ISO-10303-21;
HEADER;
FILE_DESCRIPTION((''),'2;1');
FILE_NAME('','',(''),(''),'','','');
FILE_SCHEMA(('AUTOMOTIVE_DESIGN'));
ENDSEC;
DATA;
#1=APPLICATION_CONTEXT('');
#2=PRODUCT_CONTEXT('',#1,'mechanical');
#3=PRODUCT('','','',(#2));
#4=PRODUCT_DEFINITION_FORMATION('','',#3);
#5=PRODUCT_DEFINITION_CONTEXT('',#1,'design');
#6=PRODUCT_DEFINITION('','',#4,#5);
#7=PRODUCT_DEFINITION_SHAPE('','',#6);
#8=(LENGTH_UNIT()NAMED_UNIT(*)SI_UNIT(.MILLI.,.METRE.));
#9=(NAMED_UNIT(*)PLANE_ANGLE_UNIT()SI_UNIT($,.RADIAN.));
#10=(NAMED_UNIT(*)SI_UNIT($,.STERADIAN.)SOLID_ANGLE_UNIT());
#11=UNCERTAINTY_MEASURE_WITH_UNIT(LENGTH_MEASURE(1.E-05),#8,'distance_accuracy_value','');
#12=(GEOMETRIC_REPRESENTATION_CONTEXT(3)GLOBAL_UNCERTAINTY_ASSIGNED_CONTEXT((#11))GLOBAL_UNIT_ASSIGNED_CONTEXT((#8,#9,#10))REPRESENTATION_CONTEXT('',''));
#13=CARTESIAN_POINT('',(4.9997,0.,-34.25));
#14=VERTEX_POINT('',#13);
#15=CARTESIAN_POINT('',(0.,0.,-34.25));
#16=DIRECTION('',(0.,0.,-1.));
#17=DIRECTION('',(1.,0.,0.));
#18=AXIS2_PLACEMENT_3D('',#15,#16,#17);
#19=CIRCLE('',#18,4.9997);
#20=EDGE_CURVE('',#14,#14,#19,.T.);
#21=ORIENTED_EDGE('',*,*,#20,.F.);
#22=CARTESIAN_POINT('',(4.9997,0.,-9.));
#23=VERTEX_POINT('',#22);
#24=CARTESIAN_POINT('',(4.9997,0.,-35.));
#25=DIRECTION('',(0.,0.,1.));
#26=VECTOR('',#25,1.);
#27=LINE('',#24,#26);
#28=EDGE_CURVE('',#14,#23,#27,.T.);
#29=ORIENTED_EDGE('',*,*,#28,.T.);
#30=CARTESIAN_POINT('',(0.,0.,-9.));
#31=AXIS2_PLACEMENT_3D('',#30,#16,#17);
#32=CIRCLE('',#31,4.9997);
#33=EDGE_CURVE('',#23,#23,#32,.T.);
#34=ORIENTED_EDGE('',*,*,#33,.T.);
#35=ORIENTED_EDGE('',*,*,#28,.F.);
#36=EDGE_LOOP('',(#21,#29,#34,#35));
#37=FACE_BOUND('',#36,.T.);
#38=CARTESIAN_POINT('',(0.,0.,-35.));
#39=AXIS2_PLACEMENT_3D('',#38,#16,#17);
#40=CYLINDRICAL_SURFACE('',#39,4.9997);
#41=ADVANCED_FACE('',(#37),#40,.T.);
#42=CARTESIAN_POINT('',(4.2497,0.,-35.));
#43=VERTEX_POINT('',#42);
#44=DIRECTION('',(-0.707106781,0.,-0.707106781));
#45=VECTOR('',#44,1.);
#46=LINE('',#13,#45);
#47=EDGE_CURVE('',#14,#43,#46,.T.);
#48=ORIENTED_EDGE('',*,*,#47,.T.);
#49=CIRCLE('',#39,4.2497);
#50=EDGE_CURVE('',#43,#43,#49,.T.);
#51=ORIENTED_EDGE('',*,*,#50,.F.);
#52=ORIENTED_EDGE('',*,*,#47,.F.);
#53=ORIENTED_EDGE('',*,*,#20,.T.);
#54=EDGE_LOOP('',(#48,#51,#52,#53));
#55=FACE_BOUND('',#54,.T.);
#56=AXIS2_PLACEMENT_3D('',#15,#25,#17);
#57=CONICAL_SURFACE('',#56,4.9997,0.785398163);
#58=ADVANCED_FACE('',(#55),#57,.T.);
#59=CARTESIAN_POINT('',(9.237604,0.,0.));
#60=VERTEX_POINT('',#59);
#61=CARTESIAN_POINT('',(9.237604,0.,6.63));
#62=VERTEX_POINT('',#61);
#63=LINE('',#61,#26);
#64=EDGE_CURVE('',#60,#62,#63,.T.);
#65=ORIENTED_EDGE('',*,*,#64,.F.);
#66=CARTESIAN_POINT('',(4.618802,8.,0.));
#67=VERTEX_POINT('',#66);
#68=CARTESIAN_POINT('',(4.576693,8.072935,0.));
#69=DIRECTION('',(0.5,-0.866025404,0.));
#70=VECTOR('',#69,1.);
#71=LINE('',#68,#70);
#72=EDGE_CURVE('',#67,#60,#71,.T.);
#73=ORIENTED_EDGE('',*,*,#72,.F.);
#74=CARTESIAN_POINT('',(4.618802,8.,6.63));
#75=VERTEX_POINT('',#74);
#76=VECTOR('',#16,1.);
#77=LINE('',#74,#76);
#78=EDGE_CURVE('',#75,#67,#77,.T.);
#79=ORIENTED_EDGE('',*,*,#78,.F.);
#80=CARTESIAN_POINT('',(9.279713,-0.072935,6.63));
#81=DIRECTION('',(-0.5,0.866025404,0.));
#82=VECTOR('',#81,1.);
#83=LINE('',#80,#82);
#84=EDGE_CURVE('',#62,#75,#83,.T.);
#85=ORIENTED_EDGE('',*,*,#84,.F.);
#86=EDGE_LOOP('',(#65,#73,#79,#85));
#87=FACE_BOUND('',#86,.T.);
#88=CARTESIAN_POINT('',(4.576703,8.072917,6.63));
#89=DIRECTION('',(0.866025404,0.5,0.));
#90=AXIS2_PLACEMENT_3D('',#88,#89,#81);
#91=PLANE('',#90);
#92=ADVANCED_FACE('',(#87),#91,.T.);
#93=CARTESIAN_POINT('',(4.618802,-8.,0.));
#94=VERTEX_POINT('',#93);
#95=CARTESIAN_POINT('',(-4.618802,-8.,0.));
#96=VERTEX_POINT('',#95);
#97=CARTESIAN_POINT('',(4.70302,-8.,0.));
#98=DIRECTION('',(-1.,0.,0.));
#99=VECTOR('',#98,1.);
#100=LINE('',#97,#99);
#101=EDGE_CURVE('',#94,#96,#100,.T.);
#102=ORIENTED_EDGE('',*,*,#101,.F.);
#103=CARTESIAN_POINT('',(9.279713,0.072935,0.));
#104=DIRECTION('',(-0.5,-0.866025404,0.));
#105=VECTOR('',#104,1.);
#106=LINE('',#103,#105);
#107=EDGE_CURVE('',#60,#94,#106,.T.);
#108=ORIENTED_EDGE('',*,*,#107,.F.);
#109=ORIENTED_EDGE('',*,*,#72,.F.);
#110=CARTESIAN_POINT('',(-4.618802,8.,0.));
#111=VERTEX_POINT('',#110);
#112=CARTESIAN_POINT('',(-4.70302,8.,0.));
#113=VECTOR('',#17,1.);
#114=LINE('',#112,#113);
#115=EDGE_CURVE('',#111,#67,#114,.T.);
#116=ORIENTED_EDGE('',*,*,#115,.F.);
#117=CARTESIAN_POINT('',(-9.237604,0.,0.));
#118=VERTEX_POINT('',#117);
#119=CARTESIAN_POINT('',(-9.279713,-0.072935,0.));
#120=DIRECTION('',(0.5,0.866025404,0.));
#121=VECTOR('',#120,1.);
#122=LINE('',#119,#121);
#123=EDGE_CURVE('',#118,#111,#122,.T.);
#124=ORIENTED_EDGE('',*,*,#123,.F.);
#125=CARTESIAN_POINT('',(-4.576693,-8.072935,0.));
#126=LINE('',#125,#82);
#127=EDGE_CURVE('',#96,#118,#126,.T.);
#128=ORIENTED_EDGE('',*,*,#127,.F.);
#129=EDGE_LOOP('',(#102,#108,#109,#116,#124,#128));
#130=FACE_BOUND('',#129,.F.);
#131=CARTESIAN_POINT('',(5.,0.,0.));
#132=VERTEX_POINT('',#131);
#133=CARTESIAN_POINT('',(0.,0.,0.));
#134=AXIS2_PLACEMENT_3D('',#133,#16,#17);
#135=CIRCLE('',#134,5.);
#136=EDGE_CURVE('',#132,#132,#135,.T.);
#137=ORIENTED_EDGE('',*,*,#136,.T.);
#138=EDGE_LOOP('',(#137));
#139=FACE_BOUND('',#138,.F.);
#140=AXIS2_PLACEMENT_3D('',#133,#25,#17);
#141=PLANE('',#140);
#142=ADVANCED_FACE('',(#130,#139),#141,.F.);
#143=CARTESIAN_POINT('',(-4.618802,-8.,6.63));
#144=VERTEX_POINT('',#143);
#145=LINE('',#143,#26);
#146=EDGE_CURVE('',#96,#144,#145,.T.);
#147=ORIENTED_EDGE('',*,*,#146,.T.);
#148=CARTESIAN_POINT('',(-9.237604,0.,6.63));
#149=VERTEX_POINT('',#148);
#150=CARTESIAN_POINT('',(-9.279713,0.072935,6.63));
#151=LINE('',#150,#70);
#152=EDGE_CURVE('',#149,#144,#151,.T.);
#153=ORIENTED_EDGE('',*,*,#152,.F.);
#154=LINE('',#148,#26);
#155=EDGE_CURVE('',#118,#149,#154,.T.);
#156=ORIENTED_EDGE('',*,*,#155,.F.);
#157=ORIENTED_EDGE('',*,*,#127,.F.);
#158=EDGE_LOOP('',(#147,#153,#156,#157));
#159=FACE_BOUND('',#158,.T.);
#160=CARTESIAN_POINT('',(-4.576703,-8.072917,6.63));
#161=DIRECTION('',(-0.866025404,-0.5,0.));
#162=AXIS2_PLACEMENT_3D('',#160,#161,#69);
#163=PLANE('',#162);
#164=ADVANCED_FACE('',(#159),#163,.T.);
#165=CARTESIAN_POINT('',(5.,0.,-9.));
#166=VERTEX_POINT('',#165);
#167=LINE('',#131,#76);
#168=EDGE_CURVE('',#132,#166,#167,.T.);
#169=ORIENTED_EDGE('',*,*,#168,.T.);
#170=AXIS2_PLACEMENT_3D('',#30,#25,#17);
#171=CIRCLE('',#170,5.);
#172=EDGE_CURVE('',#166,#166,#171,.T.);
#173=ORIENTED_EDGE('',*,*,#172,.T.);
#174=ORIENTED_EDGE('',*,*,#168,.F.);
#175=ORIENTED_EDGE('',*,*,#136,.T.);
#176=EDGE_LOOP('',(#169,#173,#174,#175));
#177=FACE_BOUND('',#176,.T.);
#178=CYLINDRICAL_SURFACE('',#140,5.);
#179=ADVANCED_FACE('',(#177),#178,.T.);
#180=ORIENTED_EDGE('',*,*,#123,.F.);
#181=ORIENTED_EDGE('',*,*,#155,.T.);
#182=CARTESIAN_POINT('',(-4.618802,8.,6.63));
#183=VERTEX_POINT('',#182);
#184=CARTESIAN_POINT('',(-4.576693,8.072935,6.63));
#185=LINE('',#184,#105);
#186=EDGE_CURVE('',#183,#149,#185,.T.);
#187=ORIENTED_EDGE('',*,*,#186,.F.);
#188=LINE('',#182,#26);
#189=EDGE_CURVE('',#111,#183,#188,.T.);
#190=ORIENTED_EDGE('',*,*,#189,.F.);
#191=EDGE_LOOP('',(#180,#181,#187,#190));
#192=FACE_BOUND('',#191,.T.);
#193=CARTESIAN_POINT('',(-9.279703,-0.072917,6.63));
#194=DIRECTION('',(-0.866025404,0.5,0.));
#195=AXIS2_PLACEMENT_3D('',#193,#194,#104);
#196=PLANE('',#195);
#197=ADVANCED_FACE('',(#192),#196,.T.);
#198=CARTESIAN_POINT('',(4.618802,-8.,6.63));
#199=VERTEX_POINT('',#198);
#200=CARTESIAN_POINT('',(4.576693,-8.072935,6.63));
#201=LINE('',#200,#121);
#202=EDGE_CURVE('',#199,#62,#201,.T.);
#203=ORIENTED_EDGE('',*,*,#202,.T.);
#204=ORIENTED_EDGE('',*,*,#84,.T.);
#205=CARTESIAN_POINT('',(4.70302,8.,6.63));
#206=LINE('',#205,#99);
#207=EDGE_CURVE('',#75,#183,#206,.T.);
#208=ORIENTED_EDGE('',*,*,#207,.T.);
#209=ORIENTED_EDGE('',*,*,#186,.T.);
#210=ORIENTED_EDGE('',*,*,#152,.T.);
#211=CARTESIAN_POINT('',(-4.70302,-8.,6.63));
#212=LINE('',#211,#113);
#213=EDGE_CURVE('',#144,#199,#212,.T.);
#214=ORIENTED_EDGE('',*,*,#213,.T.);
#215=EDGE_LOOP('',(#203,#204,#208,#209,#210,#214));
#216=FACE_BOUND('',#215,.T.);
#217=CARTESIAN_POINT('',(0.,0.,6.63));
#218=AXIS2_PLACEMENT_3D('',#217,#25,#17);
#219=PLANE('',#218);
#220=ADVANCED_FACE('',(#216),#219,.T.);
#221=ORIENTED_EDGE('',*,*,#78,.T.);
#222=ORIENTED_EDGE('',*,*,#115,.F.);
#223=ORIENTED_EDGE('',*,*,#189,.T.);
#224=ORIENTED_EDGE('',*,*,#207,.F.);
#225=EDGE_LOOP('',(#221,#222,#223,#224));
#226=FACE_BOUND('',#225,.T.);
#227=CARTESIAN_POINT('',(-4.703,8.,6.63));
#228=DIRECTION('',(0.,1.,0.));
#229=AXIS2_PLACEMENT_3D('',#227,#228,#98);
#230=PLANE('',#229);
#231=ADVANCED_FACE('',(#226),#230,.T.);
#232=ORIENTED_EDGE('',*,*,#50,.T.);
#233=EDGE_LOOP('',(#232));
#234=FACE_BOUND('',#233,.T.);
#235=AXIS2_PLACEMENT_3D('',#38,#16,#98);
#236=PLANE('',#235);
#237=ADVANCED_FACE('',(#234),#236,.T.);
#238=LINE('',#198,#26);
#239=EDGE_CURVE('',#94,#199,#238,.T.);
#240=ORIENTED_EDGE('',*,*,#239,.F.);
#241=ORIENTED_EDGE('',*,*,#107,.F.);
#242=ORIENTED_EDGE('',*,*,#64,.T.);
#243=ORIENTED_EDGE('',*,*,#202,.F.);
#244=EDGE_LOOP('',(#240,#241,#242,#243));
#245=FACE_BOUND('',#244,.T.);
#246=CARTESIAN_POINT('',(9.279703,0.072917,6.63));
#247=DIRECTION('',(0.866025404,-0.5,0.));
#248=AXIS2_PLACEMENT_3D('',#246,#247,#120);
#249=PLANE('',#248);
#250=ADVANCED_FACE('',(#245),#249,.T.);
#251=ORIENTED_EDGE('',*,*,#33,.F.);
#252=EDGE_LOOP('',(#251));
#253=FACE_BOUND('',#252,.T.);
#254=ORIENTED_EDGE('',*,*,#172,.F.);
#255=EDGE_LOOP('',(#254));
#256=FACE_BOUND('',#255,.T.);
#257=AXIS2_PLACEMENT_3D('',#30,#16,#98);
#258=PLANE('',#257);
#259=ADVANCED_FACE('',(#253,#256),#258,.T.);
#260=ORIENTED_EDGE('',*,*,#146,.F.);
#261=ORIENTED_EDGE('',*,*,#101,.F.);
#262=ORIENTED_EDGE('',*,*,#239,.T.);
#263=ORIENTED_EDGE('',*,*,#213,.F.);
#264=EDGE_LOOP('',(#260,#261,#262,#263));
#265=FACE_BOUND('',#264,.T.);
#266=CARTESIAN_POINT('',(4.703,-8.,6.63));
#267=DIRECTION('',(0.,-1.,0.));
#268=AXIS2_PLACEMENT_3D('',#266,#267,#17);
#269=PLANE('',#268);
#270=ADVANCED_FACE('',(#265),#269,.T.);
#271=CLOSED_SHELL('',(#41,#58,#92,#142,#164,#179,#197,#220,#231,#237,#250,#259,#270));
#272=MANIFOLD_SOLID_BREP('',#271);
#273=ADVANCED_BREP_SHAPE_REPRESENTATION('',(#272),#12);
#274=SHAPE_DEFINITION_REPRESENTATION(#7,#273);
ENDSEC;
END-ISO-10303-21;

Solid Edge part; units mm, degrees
sketch "Sketch1" plane through (0, 0, 0) normal (0, 0, 1) x (1, 0, 0)
  circle A0 centre (0, 0) radius 9.28
  dimension "D1" = 18.56
extrude "Protrusion1" add sketch "Sketch1" along normal blind 6.63
sketch "Sketch2" plane through (0, 0, 0) normal (0, 0, -1) x (1, 0, 0)
  circle A0 centre (0, 0) radius 5
extrude "Protrusion2" add sketch "Sketch2" along normal blind 35
sketch "Sketch3" plane through (0, 0, -35) normal (0, 0, -1) x (1, 0, 0)
  circle A0 centre (0, 0) radius 4.9997
extrude "Cutout1" cut sketch "Sketch3" against normal blind 26 flip side to cut
chamfer "Chamfer_1" distance 0.75 angle 45 1 edges at (-4.9997, 0, -35)
sketch "Sketch4" plane through (0, 0, 6.63) normal (0, 0, 1) x (1, 0, 0)
  line L0 (-4.703, 8) -> (4.703, 8)
  dimension "D1" = 16
extrude "Cutout2" cut sketch "Sketch4" against normal up to next material side at (0, 8.05, 6.63)
pattern_circular "Pattern1" count 6 over 360 about axis through (0, 0, 6.63) along (0, 0, 1) of "Cutout2"
properties part number "24104717"
